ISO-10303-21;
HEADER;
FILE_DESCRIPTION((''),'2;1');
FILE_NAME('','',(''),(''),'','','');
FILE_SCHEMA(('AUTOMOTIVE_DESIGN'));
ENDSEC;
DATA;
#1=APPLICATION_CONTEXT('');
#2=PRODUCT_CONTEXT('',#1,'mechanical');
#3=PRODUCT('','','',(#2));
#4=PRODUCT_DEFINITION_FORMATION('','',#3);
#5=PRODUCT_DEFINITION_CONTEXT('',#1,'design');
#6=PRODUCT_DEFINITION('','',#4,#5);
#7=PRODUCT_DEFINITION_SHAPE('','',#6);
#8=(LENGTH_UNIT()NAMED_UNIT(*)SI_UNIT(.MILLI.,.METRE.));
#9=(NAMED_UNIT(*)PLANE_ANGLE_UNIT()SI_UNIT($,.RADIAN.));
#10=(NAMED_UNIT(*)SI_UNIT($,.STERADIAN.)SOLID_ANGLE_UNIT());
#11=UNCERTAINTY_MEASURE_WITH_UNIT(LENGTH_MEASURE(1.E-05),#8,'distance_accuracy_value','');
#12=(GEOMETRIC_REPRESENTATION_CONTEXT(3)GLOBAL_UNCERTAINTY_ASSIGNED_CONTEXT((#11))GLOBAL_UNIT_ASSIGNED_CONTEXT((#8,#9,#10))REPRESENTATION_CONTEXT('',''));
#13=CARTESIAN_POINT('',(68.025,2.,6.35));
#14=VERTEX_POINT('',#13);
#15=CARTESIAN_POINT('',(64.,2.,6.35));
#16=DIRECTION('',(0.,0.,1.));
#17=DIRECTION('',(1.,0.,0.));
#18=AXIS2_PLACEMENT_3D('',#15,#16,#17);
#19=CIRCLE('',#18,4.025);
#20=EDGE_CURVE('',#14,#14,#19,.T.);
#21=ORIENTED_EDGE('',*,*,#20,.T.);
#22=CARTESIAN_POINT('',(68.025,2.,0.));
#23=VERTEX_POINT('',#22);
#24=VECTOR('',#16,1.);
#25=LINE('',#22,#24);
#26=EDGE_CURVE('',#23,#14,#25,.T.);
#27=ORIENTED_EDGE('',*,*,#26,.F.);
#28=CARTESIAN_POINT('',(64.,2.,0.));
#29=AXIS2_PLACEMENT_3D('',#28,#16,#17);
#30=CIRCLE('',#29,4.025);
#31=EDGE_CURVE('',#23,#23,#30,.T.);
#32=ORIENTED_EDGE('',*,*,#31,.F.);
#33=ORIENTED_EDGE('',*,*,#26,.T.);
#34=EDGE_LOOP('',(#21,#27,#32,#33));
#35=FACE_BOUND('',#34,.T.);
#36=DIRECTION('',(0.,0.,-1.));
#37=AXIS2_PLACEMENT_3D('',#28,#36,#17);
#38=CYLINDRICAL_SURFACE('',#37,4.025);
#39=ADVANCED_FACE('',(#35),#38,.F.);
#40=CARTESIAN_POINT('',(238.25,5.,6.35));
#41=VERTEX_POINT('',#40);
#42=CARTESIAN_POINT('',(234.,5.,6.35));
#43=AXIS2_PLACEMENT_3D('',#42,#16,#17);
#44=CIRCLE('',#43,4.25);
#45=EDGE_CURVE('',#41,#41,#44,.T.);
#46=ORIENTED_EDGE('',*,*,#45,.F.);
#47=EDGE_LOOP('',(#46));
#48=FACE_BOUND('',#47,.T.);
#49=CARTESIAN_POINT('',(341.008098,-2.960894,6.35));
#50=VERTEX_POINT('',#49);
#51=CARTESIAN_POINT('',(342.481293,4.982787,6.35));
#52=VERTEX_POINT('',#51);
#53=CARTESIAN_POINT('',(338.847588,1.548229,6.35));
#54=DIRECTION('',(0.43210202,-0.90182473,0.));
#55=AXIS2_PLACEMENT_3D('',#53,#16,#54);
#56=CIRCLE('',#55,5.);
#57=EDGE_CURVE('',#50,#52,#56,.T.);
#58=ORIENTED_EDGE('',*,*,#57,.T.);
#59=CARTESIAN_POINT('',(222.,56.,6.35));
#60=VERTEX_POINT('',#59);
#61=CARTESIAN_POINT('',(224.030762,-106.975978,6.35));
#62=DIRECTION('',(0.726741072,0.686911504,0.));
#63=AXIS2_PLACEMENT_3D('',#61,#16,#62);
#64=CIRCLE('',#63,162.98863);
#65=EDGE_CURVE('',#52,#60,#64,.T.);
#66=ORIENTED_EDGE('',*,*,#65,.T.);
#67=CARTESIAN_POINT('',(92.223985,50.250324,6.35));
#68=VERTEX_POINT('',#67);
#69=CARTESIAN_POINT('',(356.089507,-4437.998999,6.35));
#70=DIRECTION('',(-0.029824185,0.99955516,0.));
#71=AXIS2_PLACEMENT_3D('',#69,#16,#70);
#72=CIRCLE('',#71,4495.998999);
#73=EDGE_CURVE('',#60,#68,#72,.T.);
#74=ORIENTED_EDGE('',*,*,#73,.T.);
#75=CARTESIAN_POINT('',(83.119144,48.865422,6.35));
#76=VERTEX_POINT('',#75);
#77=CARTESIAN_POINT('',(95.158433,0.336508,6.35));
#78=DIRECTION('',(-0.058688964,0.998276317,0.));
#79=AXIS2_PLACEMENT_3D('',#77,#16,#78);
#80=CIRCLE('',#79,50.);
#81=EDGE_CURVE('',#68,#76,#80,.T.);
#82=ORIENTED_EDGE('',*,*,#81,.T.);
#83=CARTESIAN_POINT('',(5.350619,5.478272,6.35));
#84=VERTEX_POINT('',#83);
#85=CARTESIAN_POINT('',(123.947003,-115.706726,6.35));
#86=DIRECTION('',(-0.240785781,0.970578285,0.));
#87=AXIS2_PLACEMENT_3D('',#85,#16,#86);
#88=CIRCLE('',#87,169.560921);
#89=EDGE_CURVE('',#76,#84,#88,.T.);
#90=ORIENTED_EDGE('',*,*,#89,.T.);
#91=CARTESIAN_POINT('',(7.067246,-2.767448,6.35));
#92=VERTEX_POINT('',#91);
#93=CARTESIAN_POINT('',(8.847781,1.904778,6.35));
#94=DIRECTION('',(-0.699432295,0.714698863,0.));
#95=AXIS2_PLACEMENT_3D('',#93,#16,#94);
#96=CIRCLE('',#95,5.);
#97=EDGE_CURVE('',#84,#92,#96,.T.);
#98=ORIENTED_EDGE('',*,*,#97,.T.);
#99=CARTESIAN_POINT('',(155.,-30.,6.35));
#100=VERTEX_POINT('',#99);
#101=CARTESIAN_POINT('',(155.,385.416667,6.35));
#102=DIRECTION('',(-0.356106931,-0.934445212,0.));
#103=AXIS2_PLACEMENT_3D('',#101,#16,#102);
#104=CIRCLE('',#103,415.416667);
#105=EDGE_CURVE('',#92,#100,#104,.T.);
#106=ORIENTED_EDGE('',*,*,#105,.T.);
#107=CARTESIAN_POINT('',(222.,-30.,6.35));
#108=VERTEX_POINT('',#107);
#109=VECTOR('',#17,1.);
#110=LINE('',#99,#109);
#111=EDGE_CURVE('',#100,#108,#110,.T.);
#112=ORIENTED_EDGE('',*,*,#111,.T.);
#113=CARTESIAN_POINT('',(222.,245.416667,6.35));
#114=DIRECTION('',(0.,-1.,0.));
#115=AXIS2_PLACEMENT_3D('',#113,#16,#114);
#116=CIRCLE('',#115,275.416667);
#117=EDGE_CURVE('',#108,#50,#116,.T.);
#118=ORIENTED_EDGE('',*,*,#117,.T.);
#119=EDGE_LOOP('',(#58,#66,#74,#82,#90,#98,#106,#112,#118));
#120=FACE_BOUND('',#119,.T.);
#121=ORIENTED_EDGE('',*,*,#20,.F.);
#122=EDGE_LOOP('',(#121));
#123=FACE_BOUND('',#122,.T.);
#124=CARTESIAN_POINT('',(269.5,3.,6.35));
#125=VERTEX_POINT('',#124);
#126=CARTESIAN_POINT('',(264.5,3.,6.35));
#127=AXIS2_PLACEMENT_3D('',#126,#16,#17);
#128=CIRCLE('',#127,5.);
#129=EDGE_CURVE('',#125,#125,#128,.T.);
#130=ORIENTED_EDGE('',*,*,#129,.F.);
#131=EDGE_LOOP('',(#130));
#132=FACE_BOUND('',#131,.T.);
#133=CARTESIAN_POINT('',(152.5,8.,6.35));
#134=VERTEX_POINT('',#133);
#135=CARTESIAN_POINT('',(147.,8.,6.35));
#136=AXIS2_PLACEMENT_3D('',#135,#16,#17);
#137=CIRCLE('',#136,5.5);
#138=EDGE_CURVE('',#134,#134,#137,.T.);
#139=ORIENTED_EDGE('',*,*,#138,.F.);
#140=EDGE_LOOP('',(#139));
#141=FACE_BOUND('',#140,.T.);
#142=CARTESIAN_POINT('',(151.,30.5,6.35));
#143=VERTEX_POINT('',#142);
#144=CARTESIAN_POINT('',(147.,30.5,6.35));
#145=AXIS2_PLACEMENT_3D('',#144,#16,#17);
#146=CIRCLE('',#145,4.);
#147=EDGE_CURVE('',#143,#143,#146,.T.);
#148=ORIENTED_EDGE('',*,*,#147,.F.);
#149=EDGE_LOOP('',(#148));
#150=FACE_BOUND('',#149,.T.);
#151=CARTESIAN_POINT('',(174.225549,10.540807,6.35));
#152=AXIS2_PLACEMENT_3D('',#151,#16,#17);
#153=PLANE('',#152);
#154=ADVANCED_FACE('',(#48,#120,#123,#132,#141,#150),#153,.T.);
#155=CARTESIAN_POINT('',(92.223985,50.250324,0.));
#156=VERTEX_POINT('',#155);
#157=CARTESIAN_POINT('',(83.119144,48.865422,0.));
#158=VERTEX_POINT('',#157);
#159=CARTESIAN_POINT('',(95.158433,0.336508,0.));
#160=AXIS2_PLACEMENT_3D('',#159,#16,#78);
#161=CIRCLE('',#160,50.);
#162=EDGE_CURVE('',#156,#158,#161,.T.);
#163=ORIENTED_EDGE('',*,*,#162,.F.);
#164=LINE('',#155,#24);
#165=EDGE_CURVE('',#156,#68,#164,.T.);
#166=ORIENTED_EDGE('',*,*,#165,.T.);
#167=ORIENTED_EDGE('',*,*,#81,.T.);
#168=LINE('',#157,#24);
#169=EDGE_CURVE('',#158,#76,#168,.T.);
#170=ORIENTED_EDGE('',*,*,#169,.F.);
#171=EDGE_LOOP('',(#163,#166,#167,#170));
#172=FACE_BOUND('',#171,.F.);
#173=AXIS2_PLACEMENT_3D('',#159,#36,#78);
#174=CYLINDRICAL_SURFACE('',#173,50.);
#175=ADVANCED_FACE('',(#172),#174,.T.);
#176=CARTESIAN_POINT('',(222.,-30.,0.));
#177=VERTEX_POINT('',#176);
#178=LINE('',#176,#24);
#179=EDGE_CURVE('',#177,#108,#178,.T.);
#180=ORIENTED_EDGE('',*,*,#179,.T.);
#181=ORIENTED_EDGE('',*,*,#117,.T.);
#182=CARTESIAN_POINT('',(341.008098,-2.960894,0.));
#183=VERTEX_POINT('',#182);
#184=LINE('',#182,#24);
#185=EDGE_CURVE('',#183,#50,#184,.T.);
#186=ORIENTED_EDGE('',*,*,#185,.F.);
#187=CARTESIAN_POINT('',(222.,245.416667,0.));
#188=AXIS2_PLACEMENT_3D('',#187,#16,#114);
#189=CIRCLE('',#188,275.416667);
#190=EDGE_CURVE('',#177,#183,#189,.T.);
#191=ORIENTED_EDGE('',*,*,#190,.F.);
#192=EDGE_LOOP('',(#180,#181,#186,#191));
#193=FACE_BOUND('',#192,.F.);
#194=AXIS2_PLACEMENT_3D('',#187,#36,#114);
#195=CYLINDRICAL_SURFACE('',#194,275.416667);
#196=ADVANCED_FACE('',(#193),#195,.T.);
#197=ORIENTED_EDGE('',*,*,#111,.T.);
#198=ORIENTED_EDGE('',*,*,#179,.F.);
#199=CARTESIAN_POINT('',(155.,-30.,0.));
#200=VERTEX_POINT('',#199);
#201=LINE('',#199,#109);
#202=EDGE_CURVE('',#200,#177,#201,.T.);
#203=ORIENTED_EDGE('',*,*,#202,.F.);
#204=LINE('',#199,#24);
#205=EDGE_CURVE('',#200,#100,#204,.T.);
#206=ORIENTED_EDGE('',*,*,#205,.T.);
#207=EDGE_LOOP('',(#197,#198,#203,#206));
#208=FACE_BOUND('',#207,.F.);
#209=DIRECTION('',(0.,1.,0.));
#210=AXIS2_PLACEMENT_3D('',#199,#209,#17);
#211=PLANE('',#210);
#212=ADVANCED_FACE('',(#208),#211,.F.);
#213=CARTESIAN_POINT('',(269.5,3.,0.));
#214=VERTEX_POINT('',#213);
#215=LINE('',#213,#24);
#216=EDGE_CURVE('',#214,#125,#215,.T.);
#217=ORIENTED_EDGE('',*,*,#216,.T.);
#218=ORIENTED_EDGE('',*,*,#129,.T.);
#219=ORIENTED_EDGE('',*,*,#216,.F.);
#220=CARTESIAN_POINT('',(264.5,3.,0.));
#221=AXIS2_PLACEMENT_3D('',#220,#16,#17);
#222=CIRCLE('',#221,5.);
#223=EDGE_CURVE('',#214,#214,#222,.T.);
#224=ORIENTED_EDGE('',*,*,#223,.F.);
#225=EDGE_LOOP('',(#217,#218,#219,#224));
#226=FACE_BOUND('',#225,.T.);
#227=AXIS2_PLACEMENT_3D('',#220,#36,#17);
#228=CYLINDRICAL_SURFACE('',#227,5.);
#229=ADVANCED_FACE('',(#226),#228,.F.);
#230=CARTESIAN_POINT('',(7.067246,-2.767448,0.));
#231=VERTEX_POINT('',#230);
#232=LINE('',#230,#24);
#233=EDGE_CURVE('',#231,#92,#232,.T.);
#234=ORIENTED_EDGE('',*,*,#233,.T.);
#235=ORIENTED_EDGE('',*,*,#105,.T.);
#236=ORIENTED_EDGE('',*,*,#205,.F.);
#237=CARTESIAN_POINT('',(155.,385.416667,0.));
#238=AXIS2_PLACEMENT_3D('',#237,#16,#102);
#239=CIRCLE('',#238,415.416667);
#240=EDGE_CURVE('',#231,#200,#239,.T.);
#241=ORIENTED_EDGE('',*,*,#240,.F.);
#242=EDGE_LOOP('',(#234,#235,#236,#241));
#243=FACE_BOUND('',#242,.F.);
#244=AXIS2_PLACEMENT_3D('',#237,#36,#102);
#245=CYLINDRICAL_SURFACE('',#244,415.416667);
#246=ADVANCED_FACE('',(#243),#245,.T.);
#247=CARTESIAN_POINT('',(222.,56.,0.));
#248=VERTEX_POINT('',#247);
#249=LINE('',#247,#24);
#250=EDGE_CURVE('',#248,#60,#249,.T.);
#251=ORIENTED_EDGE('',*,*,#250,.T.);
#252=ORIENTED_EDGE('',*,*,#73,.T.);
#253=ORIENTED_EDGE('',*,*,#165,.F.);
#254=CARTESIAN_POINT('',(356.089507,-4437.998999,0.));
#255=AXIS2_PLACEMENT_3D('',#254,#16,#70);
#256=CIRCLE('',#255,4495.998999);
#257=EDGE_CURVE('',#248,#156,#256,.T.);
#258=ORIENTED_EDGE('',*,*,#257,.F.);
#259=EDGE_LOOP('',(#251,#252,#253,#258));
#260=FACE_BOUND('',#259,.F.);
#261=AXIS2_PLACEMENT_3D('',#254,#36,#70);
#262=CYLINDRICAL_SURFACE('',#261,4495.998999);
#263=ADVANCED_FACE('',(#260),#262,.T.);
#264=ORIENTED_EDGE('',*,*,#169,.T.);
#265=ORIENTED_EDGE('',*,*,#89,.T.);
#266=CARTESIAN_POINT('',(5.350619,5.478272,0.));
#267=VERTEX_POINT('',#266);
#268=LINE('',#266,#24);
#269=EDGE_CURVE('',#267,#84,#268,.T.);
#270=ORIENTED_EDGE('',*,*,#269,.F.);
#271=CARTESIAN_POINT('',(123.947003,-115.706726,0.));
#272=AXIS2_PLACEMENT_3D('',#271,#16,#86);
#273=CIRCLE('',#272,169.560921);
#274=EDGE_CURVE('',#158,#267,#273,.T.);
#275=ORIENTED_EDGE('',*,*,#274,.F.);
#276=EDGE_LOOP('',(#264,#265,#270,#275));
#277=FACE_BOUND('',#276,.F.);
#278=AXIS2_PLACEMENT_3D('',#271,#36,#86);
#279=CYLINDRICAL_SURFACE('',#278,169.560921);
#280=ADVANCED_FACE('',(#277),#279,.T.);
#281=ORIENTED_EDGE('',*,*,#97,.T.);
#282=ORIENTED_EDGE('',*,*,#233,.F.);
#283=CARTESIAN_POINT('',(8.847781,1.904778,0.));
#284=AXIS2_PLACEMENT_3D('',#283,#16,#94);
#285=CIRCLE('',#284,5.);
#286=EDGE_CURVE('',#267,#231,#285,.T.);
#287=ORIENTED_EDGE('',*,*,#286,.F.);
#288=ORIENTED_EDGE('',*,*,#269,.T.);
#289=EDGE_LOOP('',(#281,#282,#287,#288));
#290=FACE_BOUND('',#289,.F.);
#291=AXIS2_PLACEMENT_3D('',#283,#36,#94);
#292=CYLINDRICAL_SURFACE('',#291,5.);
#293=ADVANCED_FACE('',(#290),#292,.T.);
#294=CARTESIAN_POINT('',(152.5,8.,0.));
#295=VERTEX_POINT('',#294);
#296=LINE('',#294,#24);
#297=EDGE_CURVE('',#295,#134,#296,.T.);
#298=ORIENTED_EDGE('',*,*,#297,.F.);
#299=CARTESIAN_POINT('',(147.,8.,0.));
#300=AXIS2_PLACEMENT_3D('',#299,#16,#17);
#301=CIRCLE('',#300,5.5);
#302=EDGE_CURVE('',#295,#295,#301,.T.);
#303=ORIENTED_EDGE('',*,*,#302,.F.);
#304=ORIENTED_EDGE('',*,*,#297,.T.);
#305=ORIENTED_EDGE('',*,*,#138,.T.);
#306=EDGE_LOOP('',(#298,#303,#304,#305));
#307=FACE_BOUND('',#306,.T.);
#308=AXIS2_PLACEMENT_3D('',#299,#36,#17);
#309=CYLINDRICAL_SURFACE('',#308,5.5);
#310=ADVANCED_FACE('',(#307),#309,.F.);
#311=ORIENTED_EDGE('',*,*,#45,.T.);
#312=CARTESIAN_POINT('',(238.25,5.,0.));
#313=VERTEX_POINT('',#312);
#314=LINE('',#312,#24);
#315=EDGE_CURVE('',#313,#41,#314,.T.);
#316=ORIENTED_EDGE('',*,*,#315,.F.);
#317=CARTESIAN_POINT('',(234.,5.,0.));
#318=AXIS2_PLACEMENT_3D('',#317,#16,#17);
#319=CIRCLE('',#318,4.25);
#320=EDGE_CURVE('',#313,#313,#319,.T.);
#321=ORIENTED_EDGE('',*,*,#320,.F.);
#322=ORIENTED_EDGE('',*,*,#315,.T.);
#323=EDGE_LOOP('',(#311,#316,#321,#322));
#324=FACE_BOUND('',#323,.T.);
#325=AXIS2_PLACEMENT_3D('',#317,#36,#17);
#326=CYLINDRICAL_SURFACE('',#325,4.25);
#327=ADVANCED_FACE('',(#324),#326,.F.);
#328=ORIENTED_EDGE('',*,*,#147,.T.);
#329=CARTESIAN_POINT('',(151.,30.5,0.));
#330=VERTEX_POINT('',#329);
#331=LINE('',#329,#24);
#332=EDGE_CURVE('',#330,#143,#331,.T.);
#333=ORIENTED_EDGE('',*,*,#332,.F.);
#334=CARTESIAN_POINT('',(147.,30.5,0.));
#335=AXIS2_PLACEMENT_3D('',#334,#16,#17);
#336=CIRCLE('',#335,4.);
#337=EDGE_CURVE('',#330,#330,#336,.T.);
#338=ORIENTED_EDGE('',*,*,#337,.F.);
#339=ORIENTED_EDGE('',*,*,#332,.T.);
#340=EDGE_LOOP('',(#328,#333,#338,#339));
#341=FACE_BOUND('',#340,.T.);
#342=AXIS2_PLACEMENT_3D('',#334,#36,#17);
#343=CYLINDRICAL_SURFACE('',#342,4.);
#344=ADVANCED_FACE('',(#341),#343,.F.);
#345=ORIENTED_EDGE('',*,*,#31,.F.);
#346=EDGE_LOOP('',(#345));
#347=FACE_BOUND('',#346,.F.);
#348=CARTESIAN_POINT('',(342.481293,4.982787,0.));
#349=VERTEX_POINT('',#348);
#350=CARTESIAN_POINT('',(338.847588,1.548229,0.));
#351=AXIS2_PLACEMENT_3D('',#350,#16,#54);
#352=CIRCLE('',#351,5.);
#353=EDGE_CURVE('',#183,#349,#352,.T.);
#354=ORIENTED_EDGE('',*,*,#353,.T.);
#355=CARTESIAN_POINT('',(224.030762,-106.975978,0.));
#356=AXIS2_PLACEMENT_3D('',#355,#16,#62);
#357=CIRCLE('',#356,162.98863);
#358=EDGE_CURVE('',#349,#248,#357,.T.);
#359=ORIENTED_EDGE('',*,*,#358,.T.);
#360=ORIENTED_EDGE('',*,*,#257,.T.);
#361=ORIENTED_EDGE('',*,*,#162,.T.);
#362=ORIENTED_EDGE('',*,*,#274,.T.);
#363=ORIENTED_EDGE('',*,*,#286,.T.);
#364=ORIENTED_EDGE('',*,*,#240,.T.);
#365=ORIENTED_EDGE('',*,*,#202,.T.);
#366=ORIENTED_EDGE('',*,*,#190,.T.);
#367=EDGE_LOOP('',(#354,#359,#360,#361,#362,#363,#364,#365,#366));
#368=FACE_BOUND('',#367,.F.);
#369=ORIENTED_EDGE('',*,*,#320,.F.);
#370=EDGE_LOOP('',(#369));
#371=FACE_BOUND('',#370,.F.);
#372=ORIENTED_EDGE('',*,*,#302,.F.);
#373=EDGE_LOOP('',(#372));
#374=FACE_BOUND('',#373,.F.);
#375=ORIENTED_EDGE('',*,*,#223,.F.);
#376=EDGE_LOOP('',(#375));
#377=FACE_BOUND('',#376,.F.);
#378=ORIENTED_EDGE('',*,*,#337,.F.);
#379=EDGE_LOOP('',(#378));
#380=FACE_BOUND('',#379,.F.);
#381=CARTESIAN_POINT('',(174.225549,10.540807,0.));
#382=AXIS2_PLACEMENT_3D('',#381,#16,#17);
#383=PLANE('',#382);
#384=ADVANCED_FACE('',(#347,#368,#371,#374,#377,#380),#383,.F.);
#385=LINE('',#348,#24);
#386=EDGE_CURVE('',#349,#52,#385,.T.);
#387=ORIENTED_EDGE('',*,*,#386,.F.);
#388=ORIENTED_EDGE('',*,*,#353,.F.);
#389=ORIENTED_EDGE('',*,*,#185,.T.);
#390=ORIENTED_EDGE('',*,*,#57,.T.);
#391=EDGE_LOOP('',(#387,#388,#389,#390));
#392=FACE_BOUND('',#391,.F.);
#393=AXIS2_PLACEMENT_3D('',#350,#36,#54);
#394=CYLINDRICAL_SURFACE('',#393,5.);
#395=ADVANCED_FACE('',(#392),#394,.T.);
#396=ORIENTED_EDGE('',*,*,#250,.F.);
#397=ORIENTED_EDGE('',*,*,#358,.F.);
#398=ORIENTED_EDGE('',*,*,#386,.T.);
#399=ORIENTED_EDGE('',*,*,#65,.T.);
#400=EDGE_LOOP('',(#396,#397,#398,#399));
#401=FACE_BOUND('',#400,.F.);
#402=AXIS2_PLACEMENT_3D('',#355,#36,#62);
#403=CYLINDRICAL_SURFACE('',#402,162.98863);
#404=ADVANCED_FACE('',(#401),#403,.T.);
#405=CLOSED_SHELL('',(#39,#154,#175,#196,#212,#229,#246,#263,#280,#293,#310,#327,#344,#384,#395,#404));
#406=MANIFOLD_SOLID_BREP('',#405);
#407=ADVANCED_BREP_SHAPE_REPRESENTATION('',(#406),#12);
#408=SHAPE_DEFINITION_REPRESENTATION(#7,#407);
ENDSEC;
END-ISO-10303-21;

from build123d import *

# Parameters (mm, degrees)
F0_R     = 4.025
F0_R_2   = 5.5
F0_R_3   = 4.25
F0_R_4   = 5
F0_R_5   = 4
F1_DEPTH = 6.35


# Not quite as in the source:
# - a length typed as a fraction of an inch, garbled in the dataset ("3 / 203.2 mm" for 3/8 in), is restored


with BuildPart() as f1:
    # F0 (on Top) → F1 (new body)
    with BuildSketch(Plane.XY):
        with BuildLine():
            ThreePointArc((7.0672459204, -2.7674484319), (79.7907725168, -23.1351403858), (155, -30))
            Line((155, -30), (222, -30))
            ThreePointArc((222, -30), (283.0205715955, -23.1551675229), (341.0080980578, -2.9608944665))
            ThreePointArc((341.0080980578, -2.9608944665), (343.7637603339, 0.6365005197), (342.4812933157, 4.982786706))
            ThreePointArc((342.4812933157, 4.982786706), (287.5845162749, 43.1113755357), (222, 56))
            ThreePointArc((222, 56), (157.0912257731, 53.5938902672), (92.2239851956, 50.2503239761))
            ThreePointArc((92.2239851956, 50.2503239761), (87.6396110054, 49.7679486163), (83.1191443173, 48.8654223701))
            ThreePointArc((83.1191443173, 48.8654223701), (41.3356630681, 32.3684999851), (5.3506191001, 5.478271944))
            ThreePointArc((5.3506191001, 5.478271944), (3.9527325419, 0.8857070849), (7.0672459204, -2.7674484319))
        make_face()
        with Locations((64, 2)):
            Circle(F0_R, mode=Mode.SUBTRACT)
        with Locations((147, 8)):
            Circle(F0_R_2, mode=Mode.SUBTRACT)
        with Locations((234, 5)):
            Circle(F0_R_3, mode=Mode.SUBTRACT)
        with Locations((264.5, 3)):
            Circle(F0_R_4, mode=Mode.SUBTRACT)
        with Locations((147, 30.5)):
            Circle(F0_R_5, mode=Mode.SUBTRACT)
    extrude(amount=F1_DEPTH)


solid = f1.part
